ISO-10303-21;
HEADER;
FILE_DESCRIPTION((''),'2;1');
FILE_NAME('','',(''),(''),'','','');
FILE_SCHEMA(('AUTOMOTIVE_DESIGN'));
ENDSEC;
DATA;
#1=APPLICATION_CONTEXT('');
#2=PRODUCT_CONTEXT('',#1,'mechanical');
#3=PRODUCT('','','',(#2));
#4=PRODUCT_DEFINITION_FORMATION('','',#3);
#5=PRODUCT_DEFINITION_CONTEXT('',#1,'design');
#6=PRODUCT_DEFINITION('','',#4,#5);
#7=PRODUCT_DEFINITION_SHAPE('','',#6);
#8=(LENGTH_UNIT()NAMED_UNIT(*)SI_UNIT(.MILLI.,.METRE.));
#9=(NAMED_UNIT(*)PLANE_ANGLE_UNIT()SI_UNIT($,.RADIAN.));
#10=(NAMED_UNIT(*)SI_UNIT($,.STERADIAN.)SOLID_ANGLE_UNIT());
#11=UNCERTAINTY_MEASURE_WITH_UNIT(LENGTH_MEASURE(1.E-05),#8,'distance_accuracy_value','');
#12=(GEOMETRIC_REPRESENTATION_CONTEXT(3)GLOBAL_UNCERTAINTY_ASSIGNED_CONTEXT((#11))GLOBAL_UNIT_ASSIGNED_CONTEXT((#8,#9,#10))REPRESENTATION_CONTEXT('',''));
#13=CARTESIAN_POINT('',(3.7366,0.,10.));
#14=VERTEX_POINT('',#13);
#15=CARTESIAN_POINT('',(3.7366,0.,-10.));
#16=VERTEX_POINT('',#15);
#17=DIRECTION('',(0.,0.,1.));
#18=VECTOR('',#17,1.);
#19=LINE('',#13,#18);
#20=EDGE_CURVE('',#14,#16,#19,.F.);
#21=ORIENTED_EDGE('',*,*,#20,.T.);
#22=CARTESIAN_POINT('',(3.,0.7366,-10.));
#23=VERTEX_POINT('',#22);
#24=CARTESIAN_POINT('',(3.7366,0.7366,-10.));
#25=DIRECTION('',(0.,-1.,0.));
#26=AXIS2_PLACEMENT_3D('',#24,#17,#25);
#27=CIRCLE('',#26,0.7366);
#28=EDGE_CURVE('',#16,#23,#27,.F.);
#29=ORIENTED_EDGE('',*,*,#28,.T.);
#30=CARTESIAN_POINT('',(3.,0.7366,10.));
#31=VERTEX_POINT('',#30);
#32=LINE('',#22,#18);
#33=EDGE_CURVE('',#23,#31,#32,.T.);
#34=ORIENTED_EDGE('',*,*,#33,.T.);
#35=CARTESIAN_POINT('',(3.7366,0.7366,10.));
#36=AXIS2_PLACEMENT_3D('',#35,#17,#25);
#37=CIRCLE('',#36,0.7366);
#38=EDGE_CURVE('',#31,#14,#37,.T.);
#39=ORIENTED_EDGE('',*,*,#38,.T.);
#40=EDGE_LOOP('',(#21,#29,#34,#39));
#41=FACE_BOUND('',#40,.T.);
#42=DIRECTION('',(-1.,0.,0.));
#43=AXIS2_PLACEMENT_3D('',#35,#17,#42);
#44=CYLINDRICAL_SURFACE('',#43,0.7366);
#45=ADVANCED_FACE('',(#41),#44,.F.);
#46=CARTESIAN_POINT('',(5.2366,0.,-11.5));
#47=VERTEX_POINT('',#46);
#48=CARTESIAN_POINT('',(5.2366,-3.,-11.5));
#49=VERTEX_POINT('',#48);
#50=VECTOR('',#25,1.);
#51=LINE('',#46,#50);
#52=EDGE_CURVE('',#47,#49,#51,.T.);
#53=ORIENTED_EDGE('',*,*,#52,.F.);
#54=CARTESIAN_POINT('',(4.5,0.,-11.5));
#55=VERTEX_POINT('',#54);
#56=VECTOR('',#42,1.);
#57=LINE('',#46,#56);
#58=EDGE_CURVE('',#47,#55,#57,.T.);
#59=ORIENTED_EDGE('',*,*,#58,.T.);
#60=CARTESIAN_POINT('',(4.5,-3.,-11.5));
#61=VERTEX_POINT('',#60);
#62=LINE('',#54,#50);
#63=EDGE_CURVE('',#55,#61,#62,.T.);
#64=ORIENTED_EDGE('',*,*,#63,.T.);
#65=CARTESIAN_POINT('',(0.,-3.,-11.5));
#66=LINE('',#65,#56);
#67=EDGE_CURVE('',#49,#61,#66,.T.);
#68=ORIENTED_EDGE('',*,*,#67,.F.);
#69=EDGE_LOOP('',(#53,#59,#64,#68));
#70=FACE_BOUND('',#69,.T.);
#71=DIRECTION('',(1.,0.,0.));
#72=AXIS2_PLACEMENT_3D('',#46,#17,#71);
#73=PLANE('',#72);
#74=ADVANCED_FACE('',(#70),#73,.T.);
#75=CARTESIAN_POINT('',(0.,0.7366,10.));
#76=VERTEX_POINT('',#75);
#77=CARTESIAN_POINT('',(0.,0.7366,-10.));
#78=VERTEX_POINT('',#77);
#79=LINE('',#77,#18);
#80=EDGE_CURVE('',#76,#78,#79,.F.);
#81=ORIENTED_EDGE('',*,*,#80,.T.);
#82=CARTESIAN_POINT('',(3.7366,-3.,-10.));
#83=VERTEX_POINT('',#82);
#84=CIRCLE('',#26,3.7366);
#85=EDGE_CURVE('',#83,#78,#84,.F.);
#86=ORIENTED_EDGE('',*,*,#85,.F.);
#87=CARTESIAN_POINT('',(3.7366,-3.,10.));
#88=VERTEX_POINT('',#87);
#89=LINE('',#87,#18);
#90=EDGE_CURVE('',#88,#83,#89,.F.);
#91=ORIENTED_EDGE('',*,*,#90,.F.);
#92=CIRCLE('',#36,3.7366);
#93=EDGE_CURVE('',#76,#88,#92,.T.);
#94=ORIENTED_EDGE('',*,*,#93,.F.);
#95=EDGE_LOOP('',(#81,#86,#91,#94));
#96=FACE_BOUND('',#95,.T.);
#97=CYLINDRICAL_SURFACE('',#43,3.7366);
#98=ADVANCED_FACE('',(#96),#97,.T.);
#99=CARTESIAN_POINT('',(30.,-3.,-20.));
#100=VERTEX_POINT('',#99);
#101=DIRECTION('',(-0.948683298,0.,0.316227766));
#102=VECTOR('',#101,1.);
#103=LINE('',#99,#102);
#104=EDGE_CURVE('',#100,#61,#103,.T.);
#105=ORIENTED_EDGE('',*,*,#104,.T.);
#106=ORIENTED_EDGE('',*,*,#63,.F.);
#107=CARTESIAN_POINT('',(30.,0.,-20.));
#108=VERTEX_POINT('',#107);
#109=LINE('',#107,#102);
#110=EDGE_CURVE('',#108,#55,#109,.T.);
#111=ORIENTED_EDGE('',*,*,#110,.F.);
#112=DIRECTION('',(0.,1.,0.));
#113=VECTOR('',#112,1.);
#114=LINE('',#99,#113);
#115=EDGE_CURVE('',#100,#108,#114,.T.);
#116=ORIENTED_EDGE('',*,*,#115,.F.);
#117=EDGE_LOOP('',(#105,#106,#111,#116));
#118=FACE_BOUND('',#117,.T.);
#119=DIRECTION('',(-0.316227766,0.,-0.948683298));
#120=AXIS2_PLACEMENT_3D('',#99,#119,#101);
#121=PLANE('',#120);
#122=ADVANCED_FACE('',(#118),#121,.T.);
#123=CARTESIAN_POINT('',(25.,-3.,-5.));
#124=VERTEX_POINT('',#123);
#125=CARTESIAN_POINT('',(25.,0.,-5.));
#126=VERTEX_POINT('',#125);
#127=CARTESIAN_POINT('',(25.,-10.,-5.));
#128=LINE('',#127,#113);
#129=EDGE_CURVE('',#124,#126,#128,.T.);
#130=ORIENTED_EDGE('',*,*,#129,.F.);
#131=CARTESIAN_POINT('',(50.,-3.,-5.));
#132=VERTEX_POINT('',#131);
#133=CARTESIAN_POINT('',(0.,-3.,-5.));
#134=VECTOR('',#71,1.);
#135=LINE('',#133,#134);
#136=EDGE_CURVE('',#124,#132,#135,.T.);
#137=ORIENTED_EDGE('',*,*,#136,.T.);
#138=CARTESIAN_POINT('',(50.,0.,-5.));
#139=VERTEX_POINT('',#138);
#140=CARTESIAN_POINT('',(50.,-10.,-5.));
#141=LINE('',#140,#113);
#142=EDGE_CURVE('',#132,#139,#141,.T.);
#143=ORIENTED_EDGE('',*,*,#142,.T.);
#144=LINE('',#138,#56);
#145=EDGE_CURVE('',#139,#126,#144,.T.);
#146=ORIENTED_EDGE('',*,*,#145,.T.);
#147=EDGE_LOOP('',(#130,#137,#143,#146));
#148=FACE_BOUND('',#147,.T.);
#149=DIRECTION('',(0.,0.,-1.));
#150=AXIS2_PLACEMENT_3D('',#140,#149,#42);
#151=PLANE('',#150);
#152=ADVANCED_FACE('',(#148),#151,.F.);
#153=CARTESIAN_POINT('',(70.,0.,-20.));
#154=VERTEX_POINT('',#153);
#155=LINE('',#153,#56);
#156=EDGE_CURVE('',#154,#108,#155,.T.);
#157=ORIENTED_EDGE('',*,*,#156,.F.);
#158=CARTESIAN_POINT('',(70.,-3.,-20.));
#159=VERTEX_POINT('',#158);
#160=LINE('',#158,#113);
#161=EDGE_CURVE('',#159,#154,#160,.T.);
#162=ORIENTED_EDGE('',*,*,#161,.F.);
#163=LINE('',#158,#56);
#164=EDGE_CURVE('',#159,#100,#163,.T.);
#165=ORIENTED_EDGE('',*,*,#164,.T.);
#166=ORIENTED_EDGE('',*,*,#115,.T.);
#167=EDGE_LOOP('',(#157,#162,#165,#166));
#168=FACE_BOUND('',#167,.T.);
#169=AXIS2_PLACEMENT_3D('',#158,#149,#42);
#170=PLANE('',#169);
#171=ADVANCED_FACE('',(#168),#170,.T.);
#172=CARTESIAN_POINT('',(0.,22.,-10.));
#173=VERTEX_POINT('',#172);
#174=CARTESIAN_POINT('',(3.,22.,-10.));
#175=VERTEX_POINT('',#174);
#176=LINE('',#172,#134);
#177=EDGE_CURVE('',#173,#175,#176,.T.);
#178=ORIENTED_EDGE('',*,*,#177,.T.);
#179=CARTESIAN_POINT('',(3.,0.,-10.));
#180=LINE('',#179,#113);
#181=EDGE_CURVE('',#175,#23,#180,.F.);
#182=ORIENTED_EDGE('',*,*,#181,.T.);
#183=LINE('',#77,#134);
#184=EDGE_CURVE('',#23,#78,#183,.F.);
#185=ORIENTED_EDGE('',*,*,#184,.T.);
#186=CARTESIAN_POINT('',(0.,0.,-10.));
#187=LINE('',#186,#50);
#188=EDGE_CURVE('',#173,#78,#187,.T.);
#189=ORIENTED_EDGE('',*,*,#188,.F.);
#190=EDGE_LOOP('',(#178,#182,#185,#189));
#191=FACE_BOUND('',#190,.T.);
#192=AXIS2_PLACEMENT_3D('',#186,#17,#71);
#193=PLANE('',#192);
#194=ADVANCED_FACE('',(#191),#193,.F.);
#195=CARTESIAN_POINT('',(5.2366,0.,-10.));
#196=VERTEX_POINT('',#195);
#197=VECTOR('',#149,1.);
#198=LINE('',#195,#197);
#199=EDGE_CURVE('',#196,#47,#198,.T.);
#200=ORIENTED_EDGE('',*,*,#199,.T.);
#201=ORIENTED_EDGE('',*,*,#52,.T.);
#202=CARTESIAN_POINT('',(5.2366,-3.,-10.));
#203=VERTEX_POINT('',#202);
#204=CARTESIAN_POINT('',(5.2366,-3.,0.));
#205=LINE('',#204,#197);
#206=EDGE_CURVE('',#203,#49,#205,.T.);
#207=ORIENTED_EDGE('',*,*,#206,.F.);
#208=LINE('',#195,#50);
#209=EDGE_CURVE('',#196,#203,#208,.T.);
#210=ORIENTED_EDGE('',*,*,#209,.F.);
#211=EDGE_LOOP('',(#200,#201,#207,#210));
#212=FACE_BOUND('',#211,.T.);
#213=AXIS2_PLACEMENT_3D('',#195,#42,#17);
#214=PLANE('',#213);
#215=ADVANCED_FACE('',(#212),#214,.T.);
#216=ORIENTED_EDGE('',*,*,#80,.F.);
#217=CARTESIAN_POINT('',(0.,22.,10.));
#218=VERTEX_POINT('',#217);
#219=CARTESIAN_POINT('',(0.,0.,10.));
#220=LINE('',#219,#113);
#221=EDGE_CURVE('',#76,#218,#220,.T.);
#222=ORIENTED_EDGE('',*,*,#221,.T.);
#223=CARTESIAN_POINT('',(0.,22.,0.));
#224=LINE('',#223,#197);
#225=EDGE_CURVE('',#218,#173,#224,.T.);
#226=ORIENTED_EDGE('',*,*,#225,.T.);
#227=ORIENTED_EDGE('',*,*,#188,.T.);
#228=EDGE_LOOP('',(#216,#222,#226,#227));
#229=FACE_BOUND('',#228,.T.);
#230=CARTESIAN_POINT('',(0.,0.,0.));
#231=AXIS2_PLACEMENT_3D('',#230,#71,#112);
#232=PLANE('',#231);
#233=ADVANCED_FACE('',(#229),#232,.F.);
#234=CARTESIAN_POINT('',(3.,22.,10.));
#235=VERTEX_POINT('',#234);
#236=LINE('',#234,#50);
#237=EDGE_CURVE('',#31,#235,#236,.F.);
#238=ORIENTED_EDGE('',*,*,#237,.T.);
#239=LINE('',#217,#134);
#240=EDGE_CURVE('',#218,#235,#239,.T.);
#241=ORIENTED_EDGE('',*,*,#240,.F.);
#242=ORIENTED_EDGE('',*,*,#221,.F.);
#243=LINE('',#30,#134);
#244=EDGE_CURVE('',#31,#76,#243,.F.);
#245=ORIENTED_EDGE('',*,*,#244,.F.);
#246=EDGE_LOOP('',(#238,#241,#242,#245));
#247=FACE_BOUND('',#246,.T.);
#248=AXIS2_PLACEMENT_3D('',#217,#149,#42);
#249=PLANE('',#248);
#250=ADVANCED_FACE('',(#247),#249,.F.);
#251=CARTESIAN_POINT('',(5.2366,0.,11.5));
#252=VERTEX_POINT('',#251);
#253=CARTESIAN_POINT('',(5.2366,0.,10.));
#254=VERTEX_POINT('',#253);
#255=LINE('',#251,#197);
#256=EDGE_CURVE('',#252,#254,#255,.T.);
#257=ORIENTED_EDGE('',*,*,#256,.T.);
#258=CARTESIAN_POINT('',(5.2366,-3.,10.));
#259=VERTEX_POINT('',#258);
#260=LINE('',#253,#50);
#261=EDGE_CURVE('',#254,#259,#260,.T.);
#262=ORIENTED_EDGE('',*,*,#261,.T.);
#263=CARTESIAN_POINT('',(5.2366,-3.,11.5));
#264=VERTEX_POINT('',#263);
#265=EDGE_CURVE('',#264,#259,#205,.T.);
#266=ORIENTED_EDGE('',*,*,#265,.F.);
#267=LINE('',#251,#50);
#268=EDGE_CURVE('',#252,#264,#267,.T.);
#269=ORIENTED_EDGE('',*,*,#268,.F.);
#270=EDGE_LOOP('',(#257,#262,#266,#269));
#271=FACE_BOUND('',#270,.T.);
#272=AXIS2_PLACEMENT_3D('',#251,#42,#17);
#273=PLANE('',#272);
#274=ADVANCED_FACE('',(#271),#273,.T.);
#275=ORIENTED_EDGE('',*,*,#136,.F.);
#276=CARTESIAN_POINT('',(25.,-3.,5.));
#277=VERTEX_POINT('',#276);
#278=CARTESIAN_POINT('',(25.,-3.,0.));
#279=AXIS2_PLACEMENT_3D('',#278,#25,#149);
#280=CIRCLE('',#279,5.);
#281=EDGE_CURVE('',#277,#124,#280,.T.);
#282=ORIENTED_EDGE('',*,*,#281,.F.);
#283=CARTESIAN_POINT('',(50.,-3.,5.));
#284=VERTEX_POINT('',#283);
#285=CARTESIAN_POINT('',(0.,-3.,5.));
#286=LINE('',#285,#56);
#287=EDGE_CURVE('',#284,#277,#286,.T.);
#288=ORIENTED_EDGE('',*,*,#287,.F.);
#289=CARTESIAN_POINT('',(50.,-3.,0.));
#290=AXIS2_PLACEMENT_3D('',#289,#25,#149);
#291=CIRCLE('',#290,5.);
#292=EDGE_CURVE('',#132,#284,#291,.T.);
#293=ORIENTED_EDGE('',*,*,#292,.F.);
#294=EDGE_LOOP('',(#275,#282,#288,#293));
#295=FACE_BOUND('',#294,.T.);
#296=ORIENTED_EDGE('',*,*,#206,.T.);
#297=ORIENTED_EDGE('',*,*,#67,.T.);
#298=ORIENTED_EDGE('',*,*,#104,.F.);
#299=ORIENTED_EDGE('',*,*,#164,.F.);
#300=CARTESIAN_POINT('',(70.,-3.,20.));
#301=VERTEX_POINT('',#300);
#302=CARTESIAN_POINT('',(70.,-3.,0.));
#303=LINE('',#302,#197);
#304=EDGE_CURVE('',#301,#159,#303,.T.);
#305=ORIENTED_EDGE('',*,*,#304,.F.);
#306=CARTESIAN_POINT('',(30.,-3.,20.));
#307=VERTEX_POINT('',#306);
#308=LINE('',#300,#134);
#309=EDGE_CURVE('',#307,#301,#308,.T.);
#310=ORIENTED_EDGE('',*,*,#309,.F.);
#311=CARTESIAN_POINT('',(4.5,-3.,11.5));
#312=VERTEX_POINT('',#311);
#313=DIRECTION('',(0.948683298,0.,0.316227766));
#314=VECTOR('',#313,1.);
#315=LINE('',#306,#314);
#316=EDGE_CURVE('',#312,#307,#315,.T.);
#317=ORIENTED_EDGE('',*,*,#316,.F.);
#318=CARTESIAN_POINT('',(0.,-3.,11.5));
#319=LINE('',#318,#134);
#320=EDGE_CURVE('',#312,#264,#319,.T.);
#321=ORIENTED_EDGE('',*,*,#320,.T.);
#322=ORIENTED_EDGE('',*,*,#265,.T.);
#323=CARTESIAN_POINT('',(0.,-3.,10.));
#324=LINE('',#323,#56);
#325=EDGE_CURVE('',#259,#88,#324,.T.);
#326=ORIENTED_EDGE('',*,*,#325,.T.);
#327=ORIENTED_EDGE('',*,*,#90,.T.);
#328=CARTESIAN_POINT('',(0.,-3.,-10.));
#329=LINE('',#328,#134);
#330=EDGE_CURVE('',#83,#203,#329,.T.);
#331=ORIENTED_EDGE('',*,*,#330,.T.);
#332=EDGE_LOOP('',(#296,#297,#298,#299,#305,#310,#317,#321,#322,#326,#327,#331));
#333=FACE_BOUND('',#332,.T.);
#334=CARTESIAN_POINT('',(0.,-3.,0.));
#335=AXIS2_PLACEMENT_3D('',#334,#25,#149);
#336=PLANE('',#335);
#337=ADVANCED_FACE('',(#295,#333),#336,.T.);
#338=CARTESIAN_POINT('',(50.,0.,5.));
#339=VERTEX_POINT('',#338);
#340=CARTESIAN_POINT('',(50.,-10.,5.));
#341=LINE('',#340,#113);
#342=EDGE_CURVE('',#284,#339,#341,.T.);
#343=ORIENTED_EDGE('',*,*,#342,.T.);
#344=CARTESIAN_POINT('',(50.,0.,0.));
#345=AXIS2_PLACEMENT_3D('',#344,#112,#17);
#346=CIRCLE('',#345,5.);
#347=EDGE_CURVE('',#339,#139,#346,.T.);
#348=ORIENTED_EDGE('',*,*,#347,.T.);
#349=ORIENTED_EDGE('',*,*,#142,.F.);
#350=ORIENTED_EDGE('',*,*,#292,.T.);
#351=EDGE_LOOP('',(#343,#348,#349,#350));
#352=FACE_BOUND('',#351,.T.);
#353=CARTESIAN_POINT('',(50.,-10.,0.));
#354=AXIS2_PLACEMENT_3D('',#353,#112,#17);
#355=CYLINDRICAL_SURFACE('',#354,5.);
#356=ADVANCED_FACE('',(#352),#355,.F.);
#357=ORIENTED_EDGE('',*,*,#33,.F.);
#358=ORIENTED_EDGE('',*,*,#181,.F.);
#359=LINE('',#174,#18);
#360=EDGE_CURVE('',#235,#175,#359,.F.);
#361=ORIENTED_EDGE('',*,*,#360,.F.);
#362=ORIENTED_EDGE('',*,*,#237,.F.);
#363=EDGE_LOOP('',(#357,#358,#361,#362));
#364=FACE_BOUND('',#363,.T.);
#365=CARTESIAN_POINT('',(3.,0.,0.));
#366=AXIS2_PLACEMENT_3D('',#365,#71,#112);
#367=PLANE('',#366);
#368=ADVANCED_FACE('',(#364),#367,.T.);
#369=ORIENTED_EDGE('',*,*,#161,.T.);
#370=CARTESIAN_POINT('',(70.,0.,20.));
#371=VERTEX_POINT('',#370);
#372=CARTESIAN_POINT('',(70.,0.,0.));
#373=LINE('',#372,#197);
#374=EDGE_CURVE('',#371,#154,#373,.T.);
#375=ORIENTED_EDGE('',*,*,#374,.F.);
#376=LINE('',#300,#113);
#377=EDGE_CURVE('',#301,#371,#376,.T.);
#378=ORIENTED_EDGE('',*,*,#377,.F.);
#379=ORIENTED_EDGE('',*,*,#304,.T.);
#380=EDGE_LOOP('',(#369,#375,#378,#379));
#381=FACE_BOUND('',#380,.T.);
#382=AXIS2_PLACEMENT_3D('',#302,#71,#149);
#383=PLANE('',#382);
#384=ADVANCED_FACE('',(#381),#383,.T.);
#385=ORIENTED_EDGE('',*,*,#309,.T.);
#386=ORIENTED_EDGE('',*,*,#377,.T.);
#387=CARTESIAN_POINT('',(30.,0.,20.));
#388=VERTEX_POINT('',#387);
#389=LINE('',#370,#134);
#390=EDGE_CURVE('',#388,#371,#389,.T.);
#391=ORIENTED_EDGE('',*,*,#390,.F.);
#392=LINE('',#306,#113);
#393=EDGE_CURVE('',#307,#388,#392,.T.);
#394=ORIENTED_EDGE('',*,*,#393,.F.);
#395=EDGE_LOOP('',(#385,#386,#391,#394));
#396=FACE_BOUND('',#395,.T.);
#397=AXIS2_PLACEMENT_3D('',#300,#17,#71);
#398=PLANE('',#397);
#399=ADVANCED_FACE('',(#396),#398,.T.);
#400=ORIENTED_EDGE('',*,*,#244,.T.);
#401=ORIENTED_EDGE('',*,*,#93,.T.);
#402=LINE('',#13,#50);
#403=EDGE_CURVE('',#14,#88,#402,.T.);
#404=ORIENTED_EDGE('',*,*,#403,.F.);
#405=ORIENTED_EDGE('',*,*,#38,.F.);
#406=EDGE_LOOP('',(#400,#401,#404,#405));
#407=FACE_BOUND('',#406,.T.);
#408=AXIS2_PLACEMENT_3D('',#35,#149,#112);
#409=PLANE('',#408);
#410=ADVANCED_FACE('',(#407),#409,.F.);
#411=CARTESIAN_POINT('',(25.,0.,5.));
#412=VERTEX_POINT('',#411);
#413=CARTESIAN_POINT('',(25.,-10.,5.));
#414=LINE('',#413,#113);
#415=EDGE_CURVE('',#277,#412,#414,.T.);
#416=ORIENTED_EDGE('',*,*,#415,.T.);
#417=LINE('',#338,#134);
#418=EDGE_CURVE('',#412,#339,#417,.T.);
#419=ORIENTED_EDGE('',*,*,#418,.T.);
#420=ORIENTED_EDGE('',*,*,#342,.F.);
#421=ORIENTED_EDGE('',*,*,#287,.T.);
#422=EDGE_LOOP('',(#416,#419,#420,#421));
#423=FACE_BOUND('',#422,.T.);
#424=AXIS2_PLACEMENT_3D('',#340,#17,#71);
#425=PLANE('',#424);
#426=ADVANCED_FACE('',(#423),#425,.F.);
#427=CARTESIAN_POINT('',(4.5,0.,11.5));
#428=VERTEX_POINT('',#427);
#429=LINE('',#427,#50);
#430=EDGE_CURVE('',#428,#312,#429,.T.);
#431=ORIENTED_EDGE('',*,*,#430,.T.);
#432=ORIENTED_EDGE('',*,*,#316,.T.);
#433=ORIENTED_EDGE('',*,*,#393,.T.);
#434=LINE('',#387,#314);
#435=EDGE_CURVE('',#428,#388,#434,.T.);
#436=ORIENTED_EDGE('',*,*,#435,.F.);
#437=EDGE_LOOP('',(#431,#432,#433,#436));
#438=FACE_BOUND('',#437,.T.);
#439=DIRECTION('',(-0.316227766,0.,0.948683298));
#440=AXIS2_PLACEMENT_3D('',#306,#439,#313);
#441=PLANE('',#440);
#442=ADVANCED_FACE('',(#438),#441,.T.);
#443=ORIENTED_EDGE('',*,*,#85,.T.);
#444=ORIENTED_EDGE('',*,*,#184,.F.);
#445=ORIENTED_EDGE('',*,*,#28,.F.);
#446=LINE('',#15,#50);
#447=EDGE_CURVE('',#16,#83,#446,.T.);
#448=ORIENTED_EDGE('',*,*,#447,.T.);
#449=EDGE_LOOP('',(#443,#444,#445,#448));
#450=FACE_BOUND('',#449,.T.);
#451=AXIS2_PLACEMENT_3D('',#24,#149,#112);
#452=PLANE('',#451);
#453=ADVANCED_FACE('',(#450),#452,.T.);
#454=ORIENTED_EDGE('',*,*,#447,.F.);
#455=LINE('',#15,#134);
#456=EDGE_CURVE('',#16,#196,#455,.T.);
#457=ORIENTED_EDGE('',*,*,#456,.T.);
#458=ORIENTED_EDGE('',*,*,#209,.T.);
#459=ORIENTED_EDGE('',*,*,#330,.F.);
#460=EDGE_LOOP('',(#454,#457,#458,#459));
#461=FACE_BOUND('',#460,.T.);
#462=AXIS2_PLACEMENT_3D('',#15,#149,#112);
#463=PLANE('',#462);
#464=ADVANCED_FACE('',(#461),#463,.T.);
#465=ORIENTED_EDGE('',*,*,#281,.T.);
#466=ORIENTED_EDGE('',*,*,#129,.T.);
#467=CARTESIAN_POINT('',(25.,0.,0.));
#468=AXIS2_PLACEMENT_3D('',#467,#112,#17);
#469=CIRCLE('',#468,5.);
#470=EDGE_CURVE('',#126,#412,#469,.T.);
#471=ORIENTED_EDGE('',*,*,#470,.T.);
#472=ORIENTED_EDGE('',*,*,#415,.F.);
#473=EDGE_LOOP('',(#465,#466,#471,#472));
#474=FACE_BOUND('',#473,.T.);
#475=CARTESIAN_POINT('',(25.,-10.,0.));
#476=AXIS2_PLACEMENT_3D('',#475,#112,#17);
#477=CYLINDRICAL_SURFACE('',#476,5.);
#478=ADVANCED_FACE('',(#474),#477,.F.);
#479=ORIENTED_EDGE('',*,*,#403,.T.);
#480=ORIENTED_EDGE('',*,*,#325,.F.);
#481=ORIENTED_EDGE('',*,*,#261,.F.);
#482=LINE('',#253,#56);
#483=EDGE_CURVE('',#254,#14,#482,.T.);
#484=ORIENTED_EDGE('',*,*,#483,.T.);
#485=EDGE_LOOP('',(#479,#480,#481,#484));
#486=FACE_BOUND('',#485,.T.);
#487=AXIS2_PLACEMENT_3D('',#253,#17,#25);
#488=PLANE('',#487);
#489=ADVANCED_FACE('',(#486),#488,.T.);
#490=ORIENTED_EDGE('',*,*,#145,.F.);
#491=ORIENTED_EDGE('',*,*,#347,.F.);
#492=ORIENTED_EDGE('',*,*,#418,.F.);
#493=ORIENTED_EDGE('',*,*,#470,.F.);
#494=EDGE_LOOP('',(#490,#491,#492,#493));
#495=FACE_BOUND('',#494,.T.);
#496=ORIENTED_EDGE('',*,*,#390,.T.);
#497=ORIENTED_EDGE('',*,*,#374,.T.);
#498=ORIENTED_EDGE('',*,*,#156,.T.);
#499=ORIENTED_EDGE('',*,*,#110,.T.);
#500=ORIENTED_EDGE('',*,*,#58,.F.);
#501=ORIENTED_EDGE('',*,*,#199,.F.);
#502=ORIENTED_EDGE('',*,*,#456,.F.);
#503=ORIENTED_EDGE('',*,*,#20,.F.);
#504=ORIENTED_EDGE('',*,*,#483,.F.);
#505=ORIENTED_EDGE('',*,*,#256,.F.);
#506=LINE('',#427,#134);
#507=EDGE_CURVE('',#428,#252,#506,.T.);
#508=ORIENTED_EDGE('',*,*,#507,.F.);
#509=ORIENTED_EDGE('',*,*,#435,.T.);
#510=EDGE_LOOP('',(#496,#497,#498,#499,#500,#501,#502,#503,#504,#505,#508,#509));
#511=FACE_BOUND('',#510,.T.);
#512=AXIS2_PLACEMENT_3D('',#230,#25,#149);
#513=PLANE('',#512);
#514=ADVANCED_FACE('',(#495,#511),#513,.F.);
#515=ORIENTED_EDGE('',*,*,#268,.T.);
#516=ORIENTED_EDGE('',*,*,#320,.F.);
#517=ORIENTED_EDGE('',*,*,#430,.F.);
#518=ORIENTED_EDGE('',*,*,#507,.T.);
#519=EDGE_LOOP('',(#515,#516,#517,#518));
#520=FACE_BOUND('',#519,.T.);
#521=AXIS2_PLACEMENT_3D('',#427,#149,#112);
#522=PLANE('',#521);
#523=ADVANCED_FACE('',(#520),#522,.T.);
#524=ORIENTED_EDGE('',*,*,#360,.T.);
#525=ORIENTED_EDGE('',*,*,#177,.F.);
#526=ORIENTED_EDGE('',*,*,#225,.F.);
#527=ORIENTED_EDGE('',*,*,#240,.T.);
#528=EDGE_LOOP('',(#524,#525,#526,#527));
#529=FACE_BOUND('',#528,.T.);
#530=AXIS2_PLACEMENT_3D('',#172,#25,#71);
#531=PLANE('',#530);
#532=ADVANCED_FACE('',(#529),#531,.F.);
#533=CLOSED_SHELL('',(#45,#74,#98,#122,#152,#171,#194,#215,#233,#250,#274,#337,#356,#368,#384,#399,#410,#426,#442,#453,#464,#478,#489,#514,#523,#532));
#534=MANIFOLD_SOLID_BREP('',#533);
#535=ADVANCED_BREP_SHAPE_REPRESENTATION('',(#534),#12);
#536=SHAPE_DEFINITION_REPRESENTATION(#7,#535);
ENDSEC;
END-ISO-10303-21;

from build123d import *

# Parameters (mm, degrees)
BASE_FLANGE1_DEPTH            = 3
EDGE_FLANGE1_STRIP_W          = 13.4732
EDGE_FLANGE1_STRIP_H          = 3
EDGE_FLANGE1_STRIP_CUT_DEPTH  = 20
EDGE_FLANGE1_RELIEF_W         = 14.9732
EDGE_FLANGE1_RELIEF_H         = 1.5
EDGE_FLANGE1_RELIEF_CUT_DEPTH = 3
EDGE_FLANGE1_DEPTH            = 20
CUT_EXTRUDE1_DEPTH            = 10


# Sheet-metal steps are written as plain solids
with BuildPart() as part:
    # Sketch1 → Base-Flange1 (new body)
    with BuildSketch(Plane(origin=(0, 0, 0), x_dir=(1, 0, 0), z_dir=(0, 1, 0))):
        Polygon((0, 0), (0, 10), (30, 20), (70, 20), (70, 0), (70, -20), (30, -20), (0, -10), align=None)
    extrude(amount=-BASE_FLANGE1_DEPTH)

    # Edge-Flange1 strip (across the edge) → Edge-Flange1 strip cut (cut)
    with BuildSketch(Plane.XY.offset(-10)):
        with Locations((-3, -1.5)):
            Rectangle(EDGE_FLANGE1_STRIP_W, EDGE_FLANGE1_STRIP_H)
    extrude(amount=EDGE_FLANGE1_STRIP_CUT_DEPTH, mode=Mode.SUBTRACT)

    # Edge-Flange1 relief (on the sheet) → Edge-Flange1 relief cut (cut)
    with BuildSketch(Plane(origin=(3.7366, 0, -10), x_dir=(1, 0, 0), z_dir=(0, 1, 0))):
        with Locations((-5.9866, 0.75)):
            Rectangle(EDGE_FLANGE1_RELIEF_W, EDGE_FLANGE1_RELIEF_H)
        with Locations((-5.9866, -20.75)):
            Rectangle(EDGE_FLANGE1_RELIEF_W, EDGE_FLANGE1_RELIEF_H)
    extrude(amount=-EDGE_FLANGE1_RELIEF_CUT_DEPTH, mode=Mode.SUBTRACT)

    # Edge-Flange1 section (across the edge) → Edge-Flange1 (add)
    with BuildSketch(Plane.XY.offset(-10)):
        with BuildLine():
            Line((0, 0.7366), (0, 22))
            Line((0, 22), (3, 22))
            Line((3, 22), (3, 0.7366))
            ThreePointArc((3, 0.7366), (3.215745145, 0.215745145), (3.7366, 0))
            Line((3.7366, 0), (3.7366, -3))
            ThreePointArc((3.7366, -3), (1.094424801, -1.905575199), (0, 0.7366))
        make_face()
    extrude(amount=EDGE_FLANGE1_DEPTH)

    # Sketch9 → Cut-Extrude1 (cut)
    with BuildSketch(Plane(origin=(0, 0, 0), x_dir=(1, 0, 0), z_dir=(0, 1, 0))):
        with BuildLine():
            Line((50, -5), (25, -5))
            ThreePointArc((25, -5), (20, 0), (25, 5))
            Line((25, 5), (50, 5))
            ThreePointArc((50, 5), (55, 0), (50, -5))
        make_face()
    extrude(amount=-CUT_EXTRUDE1_DEPTH, mode=Mode.SUBTRACT)


solid = part.part
